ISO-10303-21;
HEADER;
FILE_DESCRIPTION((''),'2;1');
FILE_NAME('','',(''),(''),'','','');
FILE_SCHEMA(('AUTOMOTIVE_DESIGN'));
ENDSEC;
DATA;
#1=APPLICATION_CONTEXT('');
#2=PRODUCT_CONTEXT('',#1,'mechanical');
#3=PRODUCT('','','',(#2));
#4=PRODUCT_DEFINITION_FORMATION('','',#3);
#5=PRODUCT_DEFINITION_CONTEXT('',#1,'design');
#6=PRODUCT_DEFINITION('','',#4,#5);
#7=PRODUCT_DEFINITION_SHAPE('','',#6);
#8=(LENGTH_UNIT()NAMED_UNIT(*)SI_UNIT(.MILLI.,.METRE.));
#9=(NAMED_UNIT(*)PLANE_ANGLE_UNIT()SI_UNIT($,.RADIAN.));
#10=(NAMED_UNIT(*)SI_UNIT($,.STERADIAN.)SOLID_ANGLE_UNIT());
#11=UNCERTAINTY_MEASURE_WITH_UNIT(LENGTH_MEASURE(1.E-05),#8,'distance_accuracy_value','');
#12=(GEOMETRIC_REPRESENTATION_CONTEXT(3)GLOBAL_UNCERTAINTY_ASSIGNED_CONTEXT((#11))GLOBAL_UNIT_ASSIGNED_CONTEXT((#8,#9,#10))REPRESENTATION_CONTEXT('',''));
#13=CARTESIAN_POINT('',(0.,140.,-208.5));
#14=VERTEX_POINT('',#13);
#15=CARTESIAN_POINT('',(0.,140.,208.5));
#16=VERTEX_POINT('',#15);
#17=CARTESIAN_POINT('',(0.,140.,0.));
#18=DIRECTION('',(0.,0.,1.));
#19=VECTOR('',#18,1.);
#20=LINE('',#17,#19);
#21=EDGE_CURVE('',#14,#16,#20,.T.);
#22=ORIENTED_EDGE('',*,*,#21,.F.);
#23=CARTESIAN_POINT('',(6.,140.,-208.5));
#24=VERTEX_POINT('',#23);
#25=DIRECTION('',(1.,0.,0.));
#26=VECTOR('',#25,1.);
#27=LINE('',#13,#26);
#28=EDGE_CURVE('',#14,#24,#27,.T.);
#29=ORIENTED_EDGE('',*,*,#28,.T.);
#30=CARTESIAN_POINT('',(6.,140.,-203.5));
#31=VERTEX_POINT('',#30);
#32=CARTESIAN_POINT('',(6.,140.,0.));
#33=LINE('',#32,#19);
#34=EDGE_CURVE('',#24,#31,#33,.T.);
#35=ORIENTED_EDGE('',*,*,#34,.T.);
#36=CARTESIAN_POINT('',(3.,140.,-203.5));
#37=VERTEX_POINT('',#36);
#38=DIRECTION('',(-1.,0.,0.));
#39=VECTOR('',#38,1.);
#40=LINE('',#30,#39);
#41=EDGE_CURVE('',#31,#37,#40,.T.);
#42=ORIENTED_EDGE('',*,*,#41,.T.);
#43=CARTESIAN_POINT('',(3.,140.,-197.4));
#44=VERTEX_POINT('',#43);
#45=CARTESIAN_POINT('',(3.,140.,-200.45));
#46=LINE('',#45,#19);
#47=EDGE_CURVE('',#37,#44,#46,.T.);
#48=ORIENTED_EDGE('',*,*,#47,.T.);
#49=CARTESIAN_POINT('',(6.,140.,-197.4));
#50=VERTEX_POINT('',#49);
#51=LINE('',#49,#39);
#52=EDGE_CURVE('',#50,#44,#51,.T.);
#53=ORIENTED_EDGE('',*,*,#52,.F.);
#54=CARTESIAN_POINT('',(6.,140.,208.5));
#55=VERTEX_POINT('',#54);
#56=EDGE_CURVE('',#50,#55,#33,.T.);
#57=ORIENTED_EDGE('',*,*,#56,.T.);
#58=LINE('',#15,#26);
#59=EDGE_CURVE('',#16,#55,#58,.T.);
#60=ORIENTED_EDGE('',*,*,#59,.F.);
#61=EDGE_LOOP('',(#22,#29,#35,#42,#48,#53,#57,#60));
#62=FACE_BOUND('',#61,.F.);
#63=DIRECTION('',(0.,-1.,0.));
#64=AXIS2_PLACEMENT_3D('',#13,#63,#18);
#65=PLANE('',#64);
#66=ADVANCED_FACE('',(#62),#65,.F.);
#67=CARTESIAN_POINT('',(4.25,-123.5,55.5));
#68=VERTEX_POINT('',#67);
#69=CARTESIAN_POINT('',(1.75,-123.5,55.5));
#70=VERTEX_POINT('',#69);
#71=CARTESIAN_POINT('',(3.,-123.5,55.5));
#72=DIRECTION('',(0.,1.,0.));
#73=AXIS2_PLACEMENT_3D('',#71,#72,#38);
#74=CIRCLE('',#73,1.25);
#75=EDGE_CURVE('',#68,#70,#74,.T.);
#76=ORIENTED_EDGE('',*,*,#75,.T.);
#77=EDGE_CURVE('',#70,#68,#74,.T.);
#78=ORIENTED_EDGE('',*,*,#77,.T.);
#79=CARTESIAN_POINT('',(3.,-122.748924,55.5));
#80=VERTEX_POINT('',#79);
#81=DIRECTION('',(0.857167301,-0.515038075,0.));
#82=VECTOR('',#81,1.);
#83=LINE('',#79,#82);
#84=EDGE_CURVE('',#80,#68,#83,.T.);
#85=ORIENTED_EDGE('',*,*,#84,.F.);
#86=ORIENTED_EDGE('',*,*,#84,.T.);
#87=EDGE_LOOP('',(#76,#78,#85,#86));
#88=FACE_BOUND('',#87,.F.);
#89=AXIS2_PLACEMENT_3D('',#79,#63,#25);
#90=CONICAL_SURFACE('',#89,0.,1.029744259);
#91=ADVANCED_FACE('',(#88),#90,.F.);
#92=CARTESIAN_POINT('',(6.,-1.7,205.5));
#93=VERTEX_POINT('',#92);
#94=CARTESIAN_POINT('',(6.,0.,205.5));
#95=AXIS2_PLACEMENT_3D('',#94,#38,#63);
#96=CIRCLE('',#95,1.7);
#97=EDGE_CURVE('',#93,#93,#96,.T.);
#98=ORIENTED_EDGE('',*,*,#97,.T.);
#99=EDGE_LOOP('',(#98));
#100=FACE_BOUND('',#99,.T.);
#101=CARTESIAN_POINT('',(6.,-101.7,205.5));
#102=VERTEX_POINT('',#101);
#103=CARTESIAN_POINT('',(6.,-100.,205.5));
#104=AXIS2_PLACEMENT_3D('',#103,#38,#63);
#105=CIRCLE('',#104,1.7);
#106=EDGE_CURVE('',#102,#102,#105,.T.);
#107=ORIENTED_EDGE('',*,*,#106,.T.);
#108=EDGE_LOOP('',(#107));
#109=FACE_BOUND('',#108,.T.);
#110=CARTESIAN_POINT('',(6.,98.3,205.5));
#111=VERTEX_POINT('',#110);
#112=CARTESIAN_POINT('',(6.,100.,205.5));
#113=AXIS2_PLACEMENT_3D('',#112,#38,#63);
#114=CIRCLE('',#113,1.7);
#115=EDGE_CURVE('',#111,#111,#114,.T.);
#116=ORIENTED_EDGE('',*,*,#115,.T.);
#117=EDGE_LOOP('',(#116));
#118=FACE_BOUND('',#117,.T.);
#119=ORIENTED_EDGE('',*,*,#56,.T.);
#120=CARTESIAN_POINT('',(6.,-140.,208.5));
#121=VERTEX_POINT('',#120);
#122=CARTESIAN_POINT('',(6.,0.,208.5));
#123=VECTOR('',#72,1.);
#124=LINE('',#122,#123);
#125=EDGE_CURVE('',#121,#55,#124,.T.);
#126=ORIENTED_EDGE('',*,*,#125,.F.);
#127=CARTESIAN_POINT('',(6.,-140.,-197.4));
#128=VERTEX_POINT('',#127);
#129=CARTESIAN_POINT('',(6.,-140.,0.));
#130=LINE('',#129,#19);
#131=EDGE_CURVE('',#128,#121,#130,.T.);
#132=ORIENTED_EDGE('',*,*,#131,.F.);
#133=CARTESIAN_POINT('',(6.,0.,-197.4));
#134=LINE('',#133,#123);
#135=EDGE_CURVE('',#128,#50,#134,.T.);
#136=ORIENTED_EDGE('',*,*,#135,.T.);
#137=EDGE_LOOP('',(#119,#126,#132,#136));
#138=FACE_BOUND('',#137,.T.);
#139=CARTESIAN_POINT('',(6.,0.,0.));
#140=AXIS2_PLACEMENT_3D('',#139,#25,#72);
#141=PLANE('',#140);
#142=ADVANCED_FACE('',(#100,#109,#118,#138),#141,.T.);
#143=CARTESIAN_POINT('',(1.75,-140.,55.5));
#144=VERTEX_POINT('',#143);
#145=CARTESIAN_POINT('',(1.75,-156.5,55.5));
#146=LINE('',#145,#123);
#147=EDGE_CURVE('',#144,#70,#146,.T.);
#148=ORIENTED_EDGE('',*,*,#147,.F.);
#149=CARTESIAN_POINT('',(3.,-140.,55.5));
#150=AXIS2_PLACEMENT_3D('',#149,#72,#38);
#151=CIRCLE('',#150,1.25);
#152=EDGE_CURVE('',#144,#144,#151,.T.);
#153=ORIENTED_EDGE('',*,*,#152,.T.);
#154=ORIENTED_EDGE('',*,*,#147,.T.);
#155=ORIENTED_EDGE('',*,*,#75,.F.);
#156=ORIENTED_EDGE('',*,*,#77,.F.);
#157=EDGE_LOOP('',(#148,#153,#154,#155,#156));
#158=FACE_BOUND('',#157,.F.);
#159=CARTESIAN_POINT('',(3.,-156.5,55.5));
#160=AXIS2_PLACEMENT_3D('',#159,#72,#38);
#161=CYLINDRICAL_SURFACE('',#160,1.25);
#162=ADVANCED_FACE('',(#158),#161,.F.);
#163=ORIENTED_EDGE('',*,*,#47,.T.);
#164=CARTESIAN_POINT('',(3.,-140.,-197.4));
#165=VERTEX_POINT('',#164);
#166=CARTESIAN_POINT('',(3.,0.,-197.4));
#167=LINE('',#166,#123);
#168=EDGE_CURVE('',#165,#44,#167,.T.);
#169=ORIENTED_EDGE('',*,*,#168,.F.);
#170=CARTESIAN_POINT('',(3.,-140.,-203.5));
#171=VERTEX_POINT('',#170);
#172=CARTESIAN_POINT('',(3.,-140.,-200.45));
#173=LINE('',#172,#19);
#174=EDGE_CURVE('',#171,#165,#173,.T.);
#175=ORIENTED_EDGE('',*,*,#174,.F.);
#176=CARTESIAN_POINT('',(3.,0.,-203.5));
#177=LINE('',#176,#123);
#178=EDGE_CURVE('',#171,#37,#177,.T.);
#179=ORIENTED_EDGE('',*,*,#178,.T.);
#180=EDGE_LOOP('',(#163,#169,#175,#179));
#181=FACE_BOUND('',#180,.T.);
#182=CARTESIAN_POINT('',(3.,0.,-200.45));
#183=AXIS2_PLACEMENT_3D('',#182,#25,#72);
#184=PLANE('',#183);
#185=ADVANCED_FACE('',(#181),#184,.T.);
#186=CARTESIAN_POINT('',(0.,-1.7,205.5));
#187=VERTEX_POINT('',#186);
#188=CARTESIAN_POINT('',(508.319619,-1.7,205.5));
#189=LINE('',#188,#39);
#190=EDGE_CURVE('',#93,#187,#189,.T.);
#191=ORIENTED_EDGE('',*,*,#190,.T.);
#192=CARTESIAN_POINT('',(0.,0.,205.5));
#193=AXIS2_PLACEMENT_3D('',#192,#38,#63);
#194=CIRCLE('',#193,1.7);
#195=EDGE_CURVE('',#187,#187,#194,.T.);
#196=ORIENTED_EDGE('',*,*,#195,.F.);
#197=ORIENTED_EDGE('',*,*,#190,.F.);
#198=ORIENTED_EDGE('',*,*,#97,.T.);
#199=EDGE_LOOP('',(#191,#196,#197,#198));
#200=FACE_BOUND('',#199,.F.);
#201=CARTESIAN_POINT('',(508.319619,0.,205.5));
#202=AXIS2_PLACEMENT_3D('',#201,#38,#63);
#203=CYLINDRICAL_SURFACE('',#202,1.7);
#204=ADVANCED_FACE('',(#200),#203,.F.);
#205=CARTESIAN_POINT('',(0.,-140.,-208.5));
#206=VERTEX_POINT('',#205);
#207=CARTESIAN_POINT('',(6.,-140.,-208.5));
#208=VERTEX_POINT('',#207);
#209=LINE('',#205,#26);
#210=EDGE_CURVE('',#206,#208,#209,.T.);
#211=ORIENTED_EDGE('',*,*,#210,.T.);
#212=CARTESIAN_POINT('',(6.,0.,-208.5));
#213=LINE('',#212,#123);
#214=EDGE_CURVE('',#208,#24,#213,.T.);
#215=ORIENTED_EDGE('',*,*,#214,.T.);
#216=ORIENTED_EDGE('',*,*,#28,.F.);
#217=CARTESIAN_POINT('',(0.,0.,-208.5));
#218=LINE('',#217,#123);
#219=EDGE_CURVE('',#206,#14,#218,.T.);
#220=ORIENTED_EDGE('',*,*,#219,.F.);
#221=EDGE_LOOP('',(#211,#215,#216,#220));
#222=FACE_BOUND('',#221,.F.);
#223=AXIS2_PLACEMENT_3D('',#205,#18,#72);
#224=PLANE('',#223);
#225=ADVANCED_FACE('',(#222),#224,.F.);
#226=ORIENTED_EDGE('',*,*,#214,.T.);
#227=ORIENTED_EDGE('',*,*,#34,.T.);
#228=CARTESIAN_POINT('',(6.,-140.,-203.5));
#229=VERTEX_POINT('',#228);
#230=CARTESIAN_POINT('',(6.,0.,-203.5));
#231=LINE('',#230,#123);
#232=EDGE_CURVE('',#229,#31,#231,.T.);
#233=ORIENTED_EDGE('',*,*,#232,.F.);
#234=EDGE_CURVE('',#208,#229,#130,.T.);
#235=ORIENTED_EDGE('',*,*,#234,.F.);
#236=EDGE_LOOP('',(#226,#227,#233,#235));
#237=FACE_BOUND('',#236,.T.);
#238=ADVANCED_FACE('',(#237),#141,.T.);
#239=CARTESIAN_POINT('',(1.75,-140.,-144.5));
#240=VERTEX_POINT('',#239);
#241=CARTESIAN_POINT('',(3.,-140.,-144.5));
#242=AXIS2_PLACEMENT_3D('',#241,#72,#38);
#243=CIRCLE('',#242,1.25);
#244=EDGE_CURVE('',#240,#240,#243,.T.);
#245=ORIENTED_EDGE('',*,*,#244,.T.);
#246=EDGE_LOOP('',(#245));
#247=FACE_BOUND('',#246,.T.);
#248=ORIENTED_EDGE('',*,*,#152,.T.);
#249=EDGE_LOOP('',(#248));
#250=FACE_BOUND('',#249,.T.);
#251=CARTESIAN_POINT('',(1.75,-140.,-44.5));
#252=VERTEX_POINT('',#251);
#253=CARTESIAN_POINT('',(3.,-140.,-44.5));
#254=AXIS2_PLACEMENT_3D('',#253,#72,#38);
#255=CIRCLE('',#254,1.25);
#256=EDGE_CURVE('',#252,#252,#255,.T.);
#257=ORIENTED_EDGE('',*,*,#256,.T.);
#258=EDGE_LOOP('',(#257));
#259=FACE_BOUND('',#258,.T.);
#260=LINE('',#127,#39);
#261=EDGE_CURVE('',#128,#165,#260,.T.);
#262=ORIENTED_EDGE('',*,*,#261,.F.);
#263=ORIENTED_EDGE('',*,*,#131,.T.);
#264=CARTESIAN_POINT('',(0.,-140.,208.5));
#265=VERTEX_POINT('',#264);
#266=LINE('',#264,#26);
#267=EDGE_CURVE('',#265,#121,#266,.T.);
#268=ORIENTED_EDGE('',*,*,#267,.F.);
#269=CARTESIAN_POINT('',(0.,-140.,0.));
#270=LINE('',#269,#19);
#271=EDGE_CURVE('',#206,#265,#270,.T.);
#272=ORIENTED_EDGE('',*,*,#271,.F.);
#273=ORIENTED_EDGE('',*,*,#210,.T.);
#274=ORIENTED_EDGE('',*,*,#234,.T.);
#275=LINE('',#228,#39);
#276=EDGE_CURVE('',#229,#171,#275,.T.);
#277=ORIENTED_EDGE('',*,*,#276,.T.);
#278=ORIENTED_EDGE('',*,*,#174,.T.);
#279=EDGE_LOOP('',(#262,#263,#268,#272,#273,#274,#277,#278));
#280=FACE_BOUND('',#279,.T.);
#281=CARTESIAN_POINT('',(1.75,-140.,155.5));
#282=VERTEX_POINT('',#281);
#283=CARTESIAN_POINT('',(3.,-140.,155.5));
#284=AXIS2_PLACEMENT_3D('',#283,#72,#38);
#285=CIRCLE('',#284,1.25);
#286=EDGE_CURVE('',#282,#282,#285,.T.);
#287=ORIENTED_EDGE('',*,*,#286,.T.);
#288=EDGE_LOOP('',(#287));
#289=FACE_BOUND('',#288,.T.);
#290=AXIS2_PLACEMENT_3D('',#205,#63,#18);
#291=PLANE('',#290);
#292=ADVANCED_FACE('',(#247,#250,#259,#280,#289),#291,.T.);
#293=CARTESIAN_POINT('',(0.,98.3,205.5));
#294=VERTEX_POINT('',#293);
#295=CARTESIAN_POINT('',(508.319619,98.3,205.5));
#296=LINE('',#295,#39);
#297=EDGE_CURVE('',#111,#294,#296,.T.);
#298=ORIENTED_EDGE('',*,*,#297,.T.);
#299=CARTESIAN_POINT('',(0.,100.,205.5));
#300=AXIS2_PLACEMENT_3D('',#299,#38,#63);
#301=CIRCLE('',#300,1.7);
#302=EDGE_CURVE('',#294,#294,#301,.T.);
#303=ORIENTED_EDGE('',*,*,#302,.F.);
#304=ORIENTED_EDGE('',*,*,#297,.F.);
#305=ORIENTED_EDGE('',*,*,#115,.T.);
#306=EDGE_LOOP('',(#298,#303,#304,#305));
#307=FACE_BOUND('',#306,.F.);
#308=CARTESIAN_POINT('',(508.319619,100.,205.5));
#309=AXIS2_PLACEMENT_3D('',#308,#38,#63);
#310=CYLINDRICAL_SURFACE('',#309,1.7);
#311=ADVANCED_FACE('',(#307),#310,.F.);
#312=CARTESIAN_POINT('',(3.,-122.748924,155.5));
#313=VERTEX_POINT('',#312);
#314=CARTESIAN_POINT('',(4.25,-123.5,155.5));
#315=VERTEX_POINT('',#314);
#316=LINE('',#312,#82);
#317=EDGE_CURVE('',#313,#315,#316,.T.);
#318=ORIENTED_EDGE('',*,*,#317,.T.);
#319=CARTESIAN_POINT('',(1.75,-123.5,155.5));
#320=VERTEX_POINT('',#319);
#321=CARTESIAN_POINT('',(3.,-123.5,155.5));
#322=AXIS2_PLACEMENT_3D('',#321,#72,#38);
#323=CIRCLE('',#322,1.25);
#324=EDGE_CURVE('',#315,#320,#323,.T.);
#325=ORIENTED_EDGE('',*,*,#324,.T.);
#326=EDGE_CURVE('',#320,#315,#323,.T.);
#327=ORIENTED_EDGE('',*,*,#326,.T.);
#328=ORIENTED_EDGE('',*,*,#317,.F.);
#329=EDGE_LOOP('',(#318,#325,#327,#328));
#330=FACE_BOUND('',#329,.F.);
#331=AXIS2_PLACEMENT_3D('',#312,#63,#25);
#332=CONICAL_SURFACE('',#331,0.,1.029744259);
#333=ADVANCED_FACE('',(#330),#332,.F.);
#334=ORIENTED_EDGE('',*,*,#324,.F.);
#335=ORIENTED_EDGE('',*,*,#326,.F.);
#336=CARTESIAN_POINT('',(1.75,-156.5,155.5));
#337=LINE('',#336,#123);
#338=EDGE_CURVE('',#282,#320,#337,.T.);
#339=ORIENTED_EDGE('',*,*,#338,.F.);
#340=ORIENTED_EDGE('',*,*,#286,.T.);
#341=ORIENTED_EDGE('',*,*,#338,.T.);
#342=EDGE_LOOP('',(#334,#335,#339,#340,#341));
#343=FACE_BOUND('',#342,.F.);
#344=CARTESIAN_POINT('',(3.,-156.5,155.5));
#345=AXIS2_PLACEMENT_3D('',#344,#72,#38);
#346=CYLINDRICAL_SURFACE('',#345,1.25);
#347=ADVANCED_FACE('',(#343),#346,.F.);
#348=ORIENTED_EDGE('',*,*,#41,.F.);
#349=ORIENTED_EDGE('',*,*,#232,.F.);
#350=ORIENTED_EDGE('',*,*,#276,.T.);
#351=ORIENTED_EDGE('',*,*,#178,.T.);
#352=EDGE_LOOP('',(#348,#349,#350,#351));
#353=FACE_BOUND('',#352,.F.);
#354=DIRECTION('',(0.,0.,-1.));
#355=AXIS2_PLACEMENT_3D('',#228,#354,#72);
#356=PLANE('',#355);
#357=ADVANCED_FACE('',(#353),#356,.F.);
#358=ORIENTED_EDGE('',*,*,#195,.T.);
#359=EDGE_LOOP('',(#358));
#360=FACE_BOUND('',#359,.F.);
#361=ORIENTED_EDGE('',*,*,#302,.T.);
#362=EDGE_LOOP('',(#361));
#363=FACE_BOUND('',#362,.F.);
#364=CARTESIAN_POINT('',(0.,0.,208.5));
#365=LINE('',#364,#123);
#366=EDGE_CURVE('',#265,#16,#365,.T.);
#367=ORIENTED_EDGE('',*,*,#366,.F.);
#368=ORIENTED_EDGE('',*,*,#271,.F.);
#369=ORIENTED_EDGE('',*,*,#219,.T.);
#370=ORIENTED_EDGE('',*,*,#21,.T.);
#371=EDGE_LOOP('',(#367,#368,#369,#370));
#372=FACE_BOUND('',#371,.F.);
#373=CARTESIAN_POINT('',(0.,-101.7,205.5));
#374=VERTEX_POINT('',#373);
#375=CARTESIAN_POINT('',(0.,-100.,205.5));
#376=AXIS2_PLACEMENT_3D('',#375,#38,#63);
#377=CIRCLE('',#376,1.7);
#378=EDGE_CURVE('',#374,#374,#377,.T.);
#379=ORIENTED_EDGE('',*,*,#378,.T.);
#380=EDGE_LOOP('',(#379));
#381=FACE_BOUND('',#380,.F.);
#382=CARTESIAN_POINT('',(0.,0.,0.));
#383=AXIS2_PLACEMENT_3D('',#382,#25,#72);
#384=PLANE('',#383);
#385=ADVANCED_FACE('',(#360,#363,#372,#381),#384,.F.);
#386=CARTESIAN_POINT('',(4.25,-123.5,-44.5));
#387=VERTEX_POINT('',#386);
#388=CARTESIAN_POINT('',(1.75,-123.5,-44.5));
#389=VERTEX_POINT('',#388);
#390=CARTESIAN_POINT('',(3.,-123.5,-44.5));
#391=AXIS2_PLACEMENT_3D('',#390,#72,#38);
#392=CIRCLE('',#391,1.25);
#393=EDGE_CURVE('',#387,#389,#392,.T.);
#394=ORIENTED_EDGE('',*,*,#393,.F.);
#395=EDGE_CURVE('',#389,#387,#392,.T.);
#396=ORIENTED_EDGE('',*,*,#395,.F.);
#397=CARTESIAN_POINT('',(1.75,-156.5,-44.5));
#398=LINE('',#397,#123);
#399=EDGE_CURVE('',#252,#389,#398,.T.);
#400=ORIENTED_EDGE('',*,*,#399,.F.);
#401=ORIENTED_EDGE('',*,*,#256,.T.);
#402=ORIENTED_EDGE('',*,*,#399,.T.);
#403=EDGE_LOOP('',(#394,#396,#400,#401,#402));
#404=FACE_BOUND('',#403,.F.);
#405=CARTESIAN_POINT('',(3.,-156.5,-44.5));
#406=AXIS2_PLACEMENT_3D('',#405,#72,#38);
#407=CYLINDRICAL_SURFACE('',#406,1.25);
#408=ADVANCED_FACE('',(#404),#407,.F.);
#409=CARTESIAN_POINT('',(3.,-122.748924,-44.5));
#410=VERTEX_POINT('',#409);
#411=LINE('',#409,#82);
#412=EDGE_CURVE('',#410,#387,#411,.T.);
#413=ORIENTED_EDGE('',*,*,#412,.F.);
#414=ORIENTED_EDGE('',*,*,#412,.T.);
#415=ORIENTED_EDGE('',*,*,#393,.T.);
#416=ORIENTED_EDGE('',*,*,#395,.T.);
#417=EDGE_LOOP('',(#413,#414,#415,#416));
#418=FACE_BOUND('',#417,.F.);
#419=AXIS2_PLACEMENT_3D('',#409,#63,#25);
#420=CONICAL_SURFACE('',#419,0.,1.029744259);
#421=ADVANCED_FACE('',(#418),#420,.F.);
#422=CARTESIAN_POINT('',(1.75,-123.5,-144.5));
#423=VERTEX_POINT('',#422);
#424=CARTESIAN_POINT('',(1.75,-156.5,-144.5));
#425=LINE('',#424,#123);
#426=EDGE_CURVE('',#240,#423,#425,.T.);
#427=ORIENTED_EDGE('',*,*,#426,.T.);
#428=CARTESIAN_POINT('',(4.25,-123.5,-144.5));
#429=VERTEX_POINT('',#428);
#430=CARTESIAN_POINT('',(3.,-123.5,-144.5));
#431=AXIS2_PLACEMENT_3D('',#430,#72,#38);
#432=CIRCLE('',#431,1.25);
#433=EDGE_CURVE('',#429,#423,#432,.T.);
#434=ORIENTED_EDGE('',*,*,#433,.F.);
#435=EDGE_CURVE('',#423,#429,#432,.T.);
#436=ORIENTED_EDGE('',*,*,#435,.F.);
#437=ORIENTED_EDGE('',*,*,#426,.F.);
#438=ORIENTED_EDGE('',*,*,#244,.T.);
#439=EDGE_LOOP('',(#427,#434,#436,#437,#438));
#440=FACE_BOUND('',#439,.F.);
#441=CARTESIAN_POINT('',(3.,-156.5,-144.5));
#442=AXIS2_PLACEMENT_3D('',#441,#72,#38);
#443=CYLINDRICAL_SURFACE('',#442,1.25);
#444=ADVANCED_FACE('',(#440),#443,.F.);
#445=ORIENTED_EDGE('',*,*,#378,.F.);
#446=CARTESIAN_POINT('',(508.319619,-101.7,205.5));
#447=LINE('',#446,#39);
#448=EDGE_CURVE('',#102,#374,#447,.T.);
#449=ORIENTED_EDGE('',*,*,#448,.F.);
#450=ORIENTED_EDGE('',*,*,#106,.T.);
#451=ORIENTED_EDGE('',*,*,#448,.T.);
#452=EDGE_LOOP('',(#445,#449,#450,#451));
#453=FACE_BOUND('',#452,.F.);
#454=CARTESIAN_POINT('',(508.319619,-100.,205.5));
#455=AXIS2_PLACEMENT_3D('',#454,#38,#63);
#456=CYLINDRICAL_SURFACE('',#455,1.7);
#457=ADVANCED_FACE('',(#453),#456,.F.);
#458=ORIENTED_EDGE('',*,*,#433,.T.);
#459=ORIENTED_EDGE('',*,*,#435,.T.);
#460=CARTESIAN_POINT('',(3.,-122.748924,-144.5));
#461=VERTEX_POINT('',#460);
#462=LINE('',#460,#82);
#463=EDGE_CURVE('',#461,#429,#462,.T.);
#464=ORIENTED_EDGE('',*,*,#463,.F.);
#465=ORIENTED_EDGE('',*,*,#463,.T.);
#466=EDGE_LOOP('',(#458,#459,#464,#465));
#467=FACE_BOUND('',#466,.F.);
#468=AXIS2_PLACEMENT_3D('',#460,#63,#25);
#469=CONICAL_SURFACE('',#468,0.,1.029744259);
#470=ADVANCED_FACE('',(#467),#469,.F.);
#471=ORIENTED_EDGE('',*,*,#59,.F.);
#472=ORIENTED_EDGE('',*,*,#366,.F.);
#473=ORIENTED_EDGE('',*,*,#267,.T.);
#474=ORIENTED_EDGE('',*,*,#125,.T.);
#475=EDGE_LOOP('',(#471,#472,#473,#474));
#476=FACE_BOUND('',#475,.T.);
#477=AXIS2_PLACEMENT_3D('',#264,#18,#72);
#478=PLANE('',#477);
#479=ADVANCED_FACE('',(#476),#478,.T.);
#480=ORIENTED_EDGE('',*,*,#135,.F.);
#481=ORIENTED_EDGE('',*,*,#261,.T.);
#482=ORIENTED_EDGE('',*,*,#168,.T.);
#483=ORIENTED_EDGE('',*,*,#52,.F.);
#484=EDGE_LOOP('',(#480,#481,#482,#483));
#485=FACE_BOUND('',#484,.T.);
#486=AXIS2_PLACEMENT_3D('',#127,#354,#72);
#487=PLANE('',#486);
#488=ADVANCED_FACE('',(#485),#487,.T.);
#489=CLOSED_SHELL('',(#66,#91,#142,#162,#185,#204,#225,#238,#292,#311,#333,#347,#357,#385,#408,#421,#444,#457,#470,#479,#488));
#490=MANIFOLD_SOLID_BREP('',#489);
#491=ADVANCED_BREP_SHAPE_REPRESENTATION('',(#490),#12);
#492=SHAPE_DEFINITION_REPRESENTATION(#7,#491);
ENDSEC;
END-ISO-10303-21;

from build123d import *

# Parameters (mm, degrees)
F0_W     = 280
F0_H     = 417
F1_DEPTH = 6
F3_D     = 3.4
F4_W     = 280
F4_H     = 6.1
F5_DEPTH = 3
F8_D     = 2.5
F8_DEPTH = 16.5
F8_TIP   = 0.7510757738
F9_D     = 2.5
F9_DEPTH = 16.5
F9_TIP   = 0.7510757738


# Not quite as in the source:
# - a feature names something its author has since deleted; it is built from what else it names


with BuildPart() as f1:
    # F0 (on Right) → F1 (new body)
    with BuildSketch(Plane.YZ):
        Rectangle(F0_W, F0_H)
    extrude(amount=F1_DEPTH)

    # F3 (through all)
    with Locations(Plane.YZ.offset(6)):
        with Locations((100, 205.5), (0, 205.5), (-100, 205.5)):
            Hole(F3_D / 2)


with BuildPart() as f5:
    # F4 (on face) → F5 (new body)
    with BuildSketch(Plane.YZ.offset(6)):
        with Locations((0, -200.45)):
            Rectangle(F4_W, F4_H)
    extrude(amount=-F5_DEPTH)


with BuildPart() as f1_1:
    add(f1.part)

    # F6: cut F5
    add(f5.part, mode=Mode.SUBTRACT)

    # F8
    with Locations(Plane.XZ.offset(140)):
        with Locations((3, 155.5), (3, 55.5), (3, -44.5)):
            Hole(F8_D / 2, depth=F8_DEPTH)
            with Locations((0, 0, -(F8_DEPTH + F8_TIP / 2))):  # 118° drill point
                Cone(0, F8_D / 2, F8_TIP, mode=Mode.SUBTRACT)

    # F9
    with Locations(Plane.XZ.offset(140)):
        with Locations((3, -144.5)):
            Hole(F9_D / 2, depth=F9_DEPTH)
            with Locations((0, 0, -(F9_DEPTH + F9_TIP / 2))):  # 118° drill point
                Cone(0, F9_D / 2, F9_TIP, mode=Mode.SUBTRACT)


solid = f1_1.part
